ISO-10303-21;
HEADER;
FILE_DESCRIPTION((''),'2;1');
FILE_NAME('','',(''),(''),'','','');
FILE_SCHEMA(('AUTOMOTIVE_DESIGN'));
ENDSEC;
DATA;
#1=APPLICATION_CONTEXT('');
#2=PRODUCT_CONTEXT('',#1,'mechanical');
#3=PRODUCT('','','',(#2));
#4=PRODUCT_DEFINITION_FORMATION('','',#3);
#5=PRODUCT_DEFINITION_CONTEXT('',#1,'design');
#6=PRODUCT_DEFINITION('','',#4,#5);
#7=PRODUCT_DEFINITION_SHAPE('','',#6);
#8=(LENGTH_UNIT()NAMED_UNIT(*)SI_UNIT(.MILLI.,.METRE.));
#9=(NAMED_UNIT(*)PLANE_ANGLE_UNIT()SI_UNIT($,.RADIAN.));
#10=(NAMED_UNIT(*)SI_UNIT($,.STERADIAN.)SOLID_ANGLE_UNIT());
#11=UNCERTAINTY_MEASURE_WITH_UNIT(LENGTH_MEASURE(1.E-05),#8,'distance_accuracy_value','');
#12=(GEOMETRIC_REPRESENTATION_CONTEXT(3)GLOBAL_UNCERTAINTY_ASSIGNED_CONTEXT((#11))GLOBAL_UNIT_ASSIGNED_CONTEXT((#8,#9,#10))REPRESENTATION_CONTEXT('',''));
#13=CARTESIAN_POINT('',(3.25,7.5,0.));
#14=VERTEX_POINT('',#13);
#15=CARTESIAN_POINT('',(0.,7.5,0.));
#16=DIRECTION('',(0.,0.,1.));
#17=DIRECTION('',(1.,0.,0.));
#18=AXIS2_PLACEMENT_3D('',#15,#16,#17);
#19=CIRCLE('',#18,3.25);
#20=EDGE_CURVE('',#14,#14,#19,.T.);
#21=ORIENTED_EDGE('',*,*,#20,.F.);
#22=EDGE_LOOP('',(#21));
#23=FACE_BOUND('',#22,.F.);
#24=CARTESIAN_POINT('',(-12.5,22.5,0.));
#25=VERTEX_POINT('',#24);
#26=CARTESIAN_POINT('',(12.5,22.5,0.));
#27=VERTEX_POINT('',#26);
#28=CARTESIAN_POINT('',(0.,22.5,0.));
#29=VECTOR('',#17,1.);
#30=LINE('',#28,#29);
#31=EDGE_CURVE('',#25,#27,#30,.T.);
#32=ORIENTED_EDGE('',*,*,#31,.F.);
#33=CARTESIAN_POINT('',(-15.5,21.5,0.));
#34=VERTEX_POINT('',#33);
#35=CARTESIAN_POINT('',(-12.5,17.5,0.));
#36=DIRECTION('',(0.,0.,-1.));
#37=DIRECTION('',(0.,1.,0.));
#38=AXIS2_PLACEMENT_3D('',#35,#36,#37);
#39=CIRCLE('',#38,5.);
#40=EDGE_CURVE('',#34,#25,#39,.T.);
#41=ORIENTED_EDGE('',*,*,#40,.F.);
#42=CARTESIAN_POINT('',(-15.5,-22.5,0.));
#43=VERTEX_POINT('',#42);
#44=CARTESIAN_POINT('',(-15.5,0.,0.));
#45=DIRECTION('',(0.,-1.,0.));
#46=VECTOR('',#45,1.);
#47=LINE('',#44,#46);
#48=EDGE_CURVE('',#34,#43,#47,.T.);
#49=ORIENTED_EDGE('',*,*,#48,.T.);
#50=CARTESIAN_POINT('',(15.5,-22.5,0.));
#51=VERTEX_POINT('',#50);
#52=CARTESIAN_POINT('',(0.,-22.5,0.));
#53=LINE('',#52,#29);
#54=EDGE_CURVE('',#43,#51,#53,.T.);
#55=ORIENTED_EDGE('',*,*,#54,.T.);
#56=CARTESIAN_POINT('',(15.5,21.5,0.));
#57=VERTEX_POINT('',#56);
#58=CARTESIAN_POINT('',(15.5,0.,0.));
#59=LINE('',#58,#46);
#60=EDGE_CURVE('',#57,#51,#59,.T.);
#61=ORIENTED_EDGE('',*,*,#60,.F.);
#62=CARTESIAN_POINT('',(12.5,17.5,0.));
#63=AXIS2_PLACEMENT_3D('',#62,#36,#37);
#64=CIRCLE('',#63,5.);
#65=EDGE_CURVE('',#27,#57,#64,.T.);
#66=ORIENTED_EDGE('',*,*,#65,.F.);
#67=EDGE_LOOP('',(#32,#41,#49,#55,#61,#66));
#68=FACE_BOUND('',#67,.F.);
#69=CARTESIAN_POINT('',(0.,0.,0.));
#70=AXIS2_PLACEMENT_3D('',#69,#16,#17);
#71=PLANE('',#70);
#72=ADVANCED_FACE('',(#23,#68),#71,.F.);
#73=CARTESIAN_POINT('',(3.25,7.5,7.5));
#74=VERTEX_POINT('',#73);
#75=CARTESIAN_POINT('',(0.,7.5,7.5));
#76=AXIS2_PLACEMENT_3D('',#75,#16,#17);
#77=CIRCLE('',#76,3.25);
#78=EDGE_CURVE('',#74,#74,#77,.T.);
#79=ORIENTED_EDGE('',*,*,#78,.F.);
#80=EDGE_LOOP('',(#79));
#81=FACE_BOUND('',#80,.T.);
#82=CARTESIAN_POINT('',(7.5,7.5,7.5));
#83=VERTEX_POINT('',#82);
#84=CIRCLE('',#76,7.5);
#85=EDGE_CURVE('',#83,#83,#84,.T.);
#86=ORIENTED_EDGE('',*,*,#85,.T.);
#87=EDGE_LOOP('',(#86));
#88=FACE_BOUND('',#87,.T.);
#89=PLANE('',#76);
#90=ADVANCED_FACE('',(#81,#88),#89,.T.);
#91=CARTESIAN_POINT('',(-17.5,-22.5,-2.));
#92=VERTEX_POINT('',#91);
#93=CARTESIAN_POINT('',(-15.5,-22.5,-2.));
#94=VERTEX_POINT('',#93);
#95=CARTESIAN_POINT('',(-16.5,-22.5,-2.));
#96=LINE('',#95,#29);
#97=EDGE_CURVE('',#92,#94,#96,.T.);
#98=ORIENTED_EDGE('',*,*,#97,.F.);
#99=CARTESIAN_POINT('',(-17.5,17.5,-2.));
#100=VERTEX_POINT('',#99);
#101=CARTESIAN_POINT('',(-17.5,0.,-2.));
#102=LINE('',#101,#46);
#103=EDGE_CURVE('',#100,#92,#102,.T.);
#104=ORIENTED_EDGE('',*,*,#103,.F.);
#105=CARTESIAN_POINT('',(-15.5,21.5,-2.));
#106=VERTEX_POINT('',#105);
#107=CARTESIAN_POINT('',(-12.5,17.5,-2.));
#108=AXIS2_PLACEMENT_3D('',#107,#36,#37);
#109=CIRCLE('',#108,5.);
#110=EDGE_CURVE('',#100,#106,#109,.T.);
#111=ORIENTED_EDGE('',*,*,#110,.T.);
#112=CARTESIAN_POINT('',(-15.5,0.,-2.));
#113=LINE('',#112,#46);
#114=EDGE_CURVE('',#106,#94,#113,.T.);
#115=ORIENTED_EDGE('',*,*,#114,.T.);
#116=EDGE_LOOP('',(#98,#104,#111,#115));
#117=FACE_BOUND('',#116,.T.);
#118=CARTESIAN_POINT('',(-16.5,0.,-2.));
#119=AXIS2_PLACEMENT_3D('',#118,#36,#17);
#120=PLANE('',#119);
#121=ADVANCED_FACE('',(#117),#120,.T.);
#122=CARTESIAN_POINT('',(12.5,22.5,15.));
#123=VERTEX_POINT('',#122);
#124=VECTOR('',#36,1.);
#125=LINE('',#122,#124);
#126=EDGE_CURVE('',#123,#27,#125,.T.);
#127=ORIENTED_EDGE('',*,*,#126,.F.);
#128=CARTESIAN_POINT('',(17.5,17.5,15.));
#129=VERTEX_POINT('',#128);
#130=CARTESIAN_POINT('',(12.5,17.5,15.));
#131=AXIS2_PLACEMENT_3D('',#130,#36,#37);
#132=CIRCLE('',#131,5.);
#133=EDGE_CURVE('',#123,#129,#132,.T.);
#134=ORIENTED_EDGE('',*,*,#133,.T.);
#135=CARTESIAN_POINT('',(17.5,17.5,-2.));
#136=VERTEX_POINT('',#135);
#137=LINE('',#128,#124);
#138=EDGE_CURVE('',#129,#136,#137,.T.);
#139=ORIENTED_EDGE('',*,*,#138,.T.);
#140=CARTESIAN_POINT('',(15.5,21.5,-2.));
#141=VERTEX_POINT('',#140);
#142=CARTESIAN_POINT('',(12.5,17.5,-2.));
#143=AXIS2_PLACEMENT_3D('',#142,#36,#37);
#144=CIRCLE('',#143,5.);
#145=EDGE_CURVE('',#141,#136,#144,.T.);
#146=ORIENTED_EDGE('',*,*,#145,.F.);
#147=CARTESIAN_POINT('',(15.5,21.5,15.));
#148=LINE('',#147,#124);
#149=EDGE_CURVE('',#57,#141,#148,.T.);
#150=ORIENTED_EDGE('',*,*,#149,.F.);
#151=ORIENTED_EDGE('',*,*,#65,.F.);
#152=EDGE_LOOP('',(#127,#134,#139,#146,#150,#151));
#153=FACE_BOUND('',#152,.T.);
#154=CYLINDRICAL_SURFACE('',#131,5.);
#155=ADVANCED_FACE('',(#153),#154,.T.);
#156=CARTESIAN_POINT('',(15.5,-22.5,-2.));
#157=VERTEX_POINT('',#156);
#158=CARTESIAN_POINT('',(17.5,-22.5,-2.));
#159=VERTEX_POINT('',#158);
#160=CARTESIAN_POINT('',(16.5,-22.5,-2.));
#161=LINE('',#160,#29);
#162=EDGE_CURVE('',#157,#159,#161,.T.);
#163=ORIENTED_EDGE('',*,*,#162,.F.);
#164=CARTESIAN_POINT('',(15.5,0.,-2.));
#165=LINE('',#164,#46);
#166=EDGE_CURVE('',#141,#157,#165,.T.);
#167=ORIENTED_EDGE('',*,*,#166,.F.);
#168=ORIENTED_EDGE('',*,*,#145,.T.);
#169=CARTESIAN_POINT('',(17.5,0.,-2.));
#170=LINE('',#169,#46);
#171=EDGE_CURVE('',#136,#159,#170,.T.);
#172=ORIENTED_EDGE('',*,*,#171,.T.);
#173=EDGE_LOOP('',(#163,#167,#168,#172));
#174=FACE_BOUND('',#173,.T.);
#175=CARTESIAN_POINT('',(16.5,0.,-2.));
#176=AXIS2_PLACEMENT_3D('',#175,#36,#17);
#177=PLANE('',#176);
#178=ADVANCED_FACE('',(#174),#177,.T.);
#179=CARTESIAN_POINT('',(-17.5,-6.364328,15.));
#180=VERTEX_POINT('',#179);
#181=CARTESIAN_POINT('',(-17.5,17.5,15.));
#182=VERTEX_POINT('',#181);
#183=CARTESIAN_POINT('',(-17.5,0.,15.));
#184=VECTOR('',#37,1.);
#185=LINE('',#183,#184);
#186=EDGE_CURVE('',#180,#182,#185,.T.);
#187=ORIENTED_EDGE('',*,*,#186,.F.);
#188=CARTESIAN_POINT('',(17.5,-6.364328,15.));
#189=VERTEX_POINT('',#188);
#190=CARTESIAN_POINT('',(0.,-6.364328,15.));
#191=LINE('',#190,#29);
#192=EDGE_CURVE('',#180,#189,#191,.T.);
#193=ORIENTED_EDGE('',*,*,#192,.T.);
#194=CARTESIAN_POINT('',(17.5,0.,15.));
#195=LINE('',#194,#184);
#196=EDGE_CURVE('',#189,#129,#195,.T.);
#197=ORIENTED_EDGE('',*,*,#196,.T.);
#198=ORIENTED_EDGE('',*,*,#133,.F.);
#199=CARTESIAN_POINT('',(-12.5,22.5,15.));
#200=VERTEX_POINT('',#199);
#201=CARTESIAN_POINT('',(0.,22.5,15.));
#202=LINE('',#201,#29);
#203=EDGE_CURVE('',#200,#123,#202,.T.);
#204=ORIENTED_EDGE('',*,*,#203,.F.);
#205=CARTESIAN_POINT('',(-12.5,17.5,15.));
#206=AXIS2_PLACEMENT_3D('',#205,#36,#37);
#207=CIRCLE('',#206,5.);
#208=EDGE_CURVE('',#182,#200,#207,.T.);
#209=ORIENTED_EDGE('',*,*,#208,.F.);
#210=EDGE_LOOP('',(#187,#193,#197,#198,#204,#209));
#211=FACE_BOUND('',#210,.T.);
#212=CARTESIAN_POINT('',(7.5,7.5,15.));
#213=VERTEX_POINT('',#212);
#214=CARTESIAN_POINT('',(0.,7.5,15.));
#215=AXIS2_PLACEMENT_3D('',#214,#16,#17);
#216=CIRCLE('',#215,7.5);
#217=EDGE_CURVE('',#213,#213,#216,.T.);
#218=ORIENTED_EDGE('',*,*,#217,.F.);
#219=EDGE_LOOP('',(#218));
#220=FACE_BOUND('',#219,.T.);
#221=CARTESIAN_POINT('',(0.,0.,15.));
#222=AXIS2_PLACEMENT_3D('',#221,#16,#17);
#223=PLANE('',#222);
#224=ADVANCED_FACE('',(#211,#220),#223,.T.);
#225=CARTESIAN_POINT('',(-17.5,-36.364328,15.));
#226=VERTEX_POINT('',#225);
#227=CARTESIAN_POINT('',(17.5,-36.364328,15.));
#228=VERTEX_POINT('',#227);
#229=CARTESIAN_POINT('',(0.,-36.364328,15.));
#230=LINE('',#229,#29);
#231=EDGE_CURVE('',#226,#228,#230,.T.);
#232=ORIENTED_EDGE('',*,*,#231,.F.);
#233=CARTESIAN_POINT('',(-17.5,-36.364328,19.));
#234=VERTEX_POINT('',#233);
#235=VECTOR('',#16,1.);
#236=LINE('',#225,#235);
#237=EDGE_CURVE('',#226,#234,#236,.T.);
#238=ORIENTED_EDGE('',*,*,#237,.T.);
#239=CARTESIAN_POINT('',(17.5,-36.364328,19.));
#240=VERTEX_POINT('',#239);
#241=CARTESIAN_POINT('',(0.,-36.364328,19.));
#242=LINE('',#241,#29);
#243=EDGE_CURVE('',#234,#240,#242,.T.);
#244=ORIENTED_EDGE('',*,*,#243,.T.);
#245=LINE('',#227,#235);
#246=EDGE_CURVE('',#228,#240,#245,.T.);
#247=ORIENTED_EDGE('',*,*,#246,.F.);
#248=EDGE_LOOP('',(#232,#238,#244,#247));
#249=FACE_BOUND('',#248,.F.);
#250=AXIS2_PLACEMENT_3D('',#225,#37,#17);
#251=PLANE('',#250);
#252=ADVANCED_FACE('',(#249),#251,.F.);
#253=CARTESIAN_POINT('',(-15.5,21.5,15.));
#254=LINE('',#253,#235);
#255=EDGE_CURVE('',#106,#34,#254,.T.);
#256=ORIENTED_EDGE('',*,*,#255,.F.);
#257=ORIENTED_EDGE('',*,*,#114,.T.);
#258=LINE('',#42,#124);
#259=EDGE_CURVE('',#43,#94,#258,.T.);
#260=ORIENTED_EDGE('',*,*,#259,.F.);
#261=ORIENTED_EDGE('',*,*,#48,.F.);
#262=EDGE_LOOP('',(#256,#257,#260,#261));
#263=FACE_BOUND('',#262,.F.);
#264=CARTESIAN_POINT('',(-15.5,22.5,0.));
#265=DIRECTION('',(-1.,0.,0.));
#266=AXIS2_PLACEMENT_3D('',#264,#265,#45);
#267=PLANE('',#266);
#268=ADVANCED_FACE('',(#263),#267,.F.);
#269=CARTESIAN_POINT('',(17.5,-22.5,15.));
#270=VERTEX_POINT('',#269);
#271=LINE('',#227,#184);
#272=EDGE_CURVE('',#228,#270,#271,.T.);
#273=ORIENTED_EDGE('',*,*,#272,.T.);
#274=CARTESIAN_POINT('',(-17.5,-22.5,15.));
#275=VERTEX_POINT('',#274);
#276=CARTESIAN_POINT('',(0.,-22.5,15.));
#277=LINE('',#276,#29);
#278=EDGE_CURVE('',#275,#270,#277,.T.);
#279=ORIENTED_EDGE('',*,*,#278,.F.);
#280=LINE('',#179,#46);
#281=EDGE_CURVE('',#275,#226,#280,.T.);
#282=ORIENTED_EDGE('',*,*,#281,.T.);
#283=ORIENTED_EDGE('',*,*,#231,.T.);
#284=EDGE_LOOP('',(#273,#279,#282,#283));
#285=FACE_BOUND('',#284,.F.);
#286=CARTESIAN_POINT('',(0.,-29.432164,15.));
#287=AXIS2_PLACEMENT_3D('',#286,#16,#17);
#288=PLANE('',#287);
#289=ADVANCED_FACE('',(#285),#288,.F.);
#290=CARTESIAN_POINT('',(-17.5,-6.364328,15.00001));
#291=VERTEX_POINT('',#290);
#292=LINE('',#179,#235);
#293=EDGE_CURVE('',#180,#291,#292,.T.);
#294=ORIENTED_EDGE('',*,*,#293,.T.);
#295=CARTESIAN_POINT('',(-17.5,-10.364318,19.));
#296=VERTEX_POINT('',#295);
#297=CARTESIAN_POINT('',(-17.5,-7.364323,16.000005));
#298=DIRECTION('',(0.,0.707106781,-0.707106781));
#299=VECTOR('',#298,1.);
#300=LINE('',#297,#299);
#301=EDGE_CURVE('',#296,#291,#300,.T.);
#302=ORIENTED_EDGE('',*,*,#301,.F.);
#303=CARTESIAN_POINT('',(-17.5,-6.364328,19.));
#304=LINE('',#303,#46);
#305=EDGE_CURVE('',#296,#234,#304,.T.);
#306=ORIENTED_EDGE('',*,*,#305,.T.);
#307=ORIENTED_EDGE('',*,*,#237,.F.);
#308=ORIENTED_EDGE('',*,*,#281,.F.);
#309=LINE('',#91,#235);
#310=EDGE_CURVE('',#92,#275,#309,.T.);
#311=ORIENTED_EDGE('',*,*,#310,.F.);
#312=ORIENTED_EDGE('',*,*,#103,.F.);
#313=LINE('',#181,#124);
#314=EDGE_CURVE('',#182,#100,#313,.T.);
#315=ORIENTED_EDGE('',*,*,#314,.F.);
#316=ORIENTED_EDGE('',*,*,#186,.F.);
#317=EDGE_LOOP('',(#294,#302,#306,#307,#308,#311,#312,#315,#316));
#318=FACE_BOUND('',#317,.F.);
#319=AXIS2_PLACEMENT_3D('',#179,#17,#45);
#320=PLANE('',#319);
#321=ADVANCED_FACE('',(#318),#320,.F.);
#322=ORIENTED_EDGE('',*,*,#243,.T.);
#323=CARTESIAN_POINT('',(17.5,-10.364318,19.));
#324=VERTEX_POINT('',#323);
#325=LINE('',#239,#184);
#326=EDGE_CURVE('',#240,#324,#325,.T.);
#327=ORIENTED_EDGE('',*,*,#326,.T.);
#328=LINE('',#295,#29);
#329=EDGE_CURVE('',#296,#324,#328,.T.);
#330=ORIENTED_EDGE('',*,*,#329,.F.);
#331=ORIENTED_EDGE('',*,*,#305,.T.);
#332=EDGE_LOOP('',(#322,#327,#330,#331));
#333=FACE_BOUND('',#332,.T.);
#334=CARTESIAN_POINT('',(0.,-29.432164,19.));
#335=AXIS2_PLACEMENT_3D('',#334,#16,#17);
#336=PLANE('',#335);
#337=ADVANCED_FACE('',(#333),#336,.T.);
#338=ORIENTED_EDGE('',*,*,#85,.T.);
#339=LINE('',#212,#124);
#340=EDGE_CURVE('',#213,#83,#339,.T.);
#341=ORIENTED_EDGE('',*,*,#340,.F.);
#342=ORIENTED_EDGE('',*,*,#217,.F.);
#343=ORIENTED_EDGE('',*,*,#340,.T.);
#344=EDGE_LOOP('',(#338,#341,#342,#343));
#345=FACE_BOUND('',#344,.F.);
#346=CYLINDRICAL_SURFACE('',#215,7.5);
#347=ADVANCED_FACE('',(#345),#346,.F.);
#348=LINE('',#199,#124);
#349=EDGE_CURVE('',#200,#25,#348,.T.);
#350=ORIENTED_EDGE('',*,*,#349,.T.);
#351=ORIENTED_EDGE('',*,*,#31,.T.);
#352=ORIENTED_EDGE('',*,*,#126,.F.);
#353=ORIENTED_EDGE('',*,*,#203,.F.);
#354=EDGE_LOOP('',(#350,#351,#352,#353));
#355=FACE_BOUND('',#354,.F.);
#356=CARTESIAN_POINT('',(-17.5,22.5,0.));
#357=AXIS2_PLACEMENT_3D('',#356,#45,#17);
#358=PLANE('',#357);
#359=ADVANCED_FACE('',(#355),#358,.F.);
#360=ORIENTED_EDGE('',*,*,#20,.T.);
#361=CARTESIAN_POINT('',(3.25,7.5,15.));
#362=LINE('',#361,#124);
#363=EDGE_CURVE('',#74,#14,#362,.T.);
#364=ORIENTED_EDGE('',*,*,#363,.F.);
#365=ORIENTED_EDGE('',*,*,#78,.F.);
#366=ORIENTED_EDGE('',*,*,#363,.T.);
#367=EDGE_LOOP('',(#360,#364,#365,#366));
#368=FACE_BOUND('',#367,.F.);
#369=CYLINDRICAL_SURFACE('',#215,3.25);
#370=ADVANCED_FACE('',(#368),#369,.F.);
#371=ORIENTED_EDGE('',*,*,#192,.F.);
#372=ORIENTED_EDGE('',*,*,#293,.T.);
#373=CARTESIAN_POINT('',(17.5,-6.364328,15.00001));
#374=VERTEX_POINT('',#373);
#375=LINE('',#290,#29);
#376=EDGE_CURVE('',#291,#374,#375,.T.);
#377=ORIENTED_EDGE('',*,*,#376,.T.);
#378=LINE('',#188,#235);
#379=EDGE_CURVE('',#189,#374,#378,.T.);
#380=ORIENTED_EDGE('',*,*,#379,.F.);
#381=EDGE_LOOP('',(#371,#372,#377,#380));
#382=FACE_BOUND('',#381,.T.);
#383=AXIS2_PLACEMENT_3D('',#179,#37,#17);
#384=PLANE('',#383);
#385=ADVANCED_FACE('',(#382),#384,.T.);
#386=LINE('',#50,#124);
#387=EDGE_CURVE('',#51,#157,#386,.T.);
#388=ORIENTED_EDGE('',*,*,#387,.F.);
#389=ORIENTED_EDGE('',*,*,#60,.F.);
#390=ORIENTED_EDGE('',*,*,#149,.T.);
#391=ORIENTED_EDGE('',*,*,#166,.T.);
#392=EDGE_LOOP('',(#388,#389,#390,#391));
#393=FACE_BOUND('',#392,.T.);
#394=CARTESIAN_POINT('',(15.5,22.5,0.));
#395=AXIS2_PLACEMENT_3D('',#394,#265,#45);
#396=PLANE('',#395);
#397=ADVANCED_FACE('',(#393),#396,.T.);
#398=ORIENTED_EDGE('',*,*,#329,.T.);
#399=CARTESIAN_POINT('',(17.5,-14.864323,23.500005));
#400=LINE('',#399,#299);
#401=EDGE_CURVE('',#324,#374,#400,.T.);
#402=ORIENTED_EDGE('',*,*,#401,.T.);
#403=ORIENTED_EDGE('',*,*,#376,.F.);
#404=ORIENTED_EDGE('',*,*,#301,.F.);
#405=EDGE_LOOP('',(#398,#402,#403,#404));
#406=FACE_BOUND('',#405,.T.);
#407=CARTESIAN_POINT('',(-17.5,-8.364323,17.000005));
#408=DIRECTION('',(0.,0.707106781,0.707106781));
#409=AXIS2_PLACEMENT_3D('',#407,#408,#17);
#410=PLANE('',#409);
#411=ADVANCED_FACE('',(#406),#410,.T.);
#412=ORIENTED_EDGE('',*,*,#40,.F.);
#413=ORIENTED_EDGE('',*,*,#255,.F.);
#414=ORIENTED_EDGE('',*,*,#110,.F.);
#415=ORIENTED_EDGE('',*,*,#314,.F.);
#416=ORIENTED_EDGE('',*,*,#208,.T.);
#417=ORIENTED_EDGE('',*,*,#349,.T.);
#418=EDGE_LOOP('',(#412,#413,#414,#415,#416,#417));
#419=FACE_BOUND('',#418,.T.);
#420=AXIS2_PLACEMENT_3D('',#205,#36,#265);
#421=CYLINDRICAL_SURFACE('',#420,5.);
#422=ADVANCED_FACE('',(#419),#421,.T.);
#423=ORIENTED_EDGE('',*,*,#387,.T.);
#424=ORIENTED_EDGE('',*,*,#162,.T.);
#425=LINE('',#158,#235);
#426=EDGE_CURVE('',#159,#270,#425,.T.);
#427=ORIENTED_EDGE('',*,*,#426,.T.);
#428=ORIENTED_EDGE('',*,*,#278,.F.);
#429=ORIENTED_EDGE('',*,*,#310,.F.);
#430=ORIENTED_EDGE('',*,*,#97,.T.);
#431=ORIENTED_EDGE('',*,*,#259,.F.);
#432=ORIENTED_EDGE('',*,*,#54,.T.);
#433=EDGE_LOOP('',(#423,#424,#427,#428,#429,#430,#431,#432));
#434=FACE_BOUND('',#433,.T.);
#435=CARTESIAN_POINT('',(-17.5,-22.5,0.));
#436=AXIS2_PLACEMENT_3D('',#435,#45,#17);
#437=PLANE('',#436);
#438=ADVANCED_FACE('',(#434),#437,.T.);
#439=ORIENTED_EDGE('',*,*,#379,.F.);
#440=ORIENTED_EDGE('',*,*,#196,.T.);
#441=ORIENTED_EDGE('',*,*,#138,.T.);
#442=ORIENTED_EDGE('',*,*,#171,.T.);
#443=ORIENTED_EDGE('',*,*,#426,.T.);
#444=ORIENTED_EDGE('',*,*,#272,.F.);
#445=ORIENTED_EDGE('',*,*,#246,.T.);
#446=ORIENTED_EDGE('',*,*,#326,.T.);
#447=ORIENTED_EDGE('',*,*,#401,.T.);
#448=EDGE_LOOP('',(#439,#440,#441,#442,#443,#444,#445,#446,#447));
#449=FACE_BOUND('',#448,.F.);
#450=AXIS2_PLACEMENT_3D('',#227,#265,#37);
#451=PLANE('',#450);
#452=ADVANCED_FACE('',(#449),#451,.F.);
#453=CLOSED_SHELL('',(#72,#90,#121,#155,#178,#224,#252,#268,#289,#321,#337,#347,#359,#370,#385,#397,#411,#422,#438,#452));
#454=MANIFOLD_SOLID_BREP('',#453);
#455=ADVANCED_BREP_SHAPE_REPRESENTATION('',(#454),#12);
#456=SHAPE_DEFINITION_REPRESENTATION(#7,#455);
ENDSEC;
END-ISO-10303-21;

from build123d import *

# Parameters (mm, degrees)
F0_W      = 35
F0_H      = 45
F1_DEPTH  = 15
F2_W      = 2
F2_H      = 45
F3_DEPTH  = 2
F4_W      = 35
F4_H      = 13.8643281162
F4_H_2    = 16.1356718838
F5_DEPTH  = 4
F6_SIZE   = 3.99999
F7_R      = 3.25
F8_DEPTH  = 15
F9_R      = 5
F10_R     = 7.5
F10_R_2   = 3.25
F11_DEPTH = 7.5


# Not quite as in the source:
# - a fillet or chamfer is up to 0.001 mm smaller than in the source, because OpenCascade refuses the exact size


with BuildPart() as f1:
    # F0 (on Top) → F1 (new body)
    with BuildSketch(Plane.XY):
        Rectangle(F0_W, F0_H)
    extrude(amount=F1_DEPTH)

    # F2 (on face) → F3 (join)
    with BuildSketch(Plane(origin=(0, 0, 0), x_dir=(1, 0, 0), z_dir=(0, 0, -1))):
        with Locations((-16.5, 0)):
            Rectangle(F2_W, F2_H)
        with Locations((16.5, 0)):
            Rectangle(F2_W, F2_H)
    extrude(amount=F3_DEPTH)

    # F4 (on face) → F5 (join)
    with BuildSketch(Plane.XY.offset(15)):
        with Locations((0, -29.4321640581)):
            Rectangle(F4_W, F4_H)
        with Locations((0, -14.4321640581)):
            Rectangle(F4_W, F4_H_2)
    extrude(amount=F5_DEPTH)

    # F6 (size 4 in the source; OpenCascade refuses exactly that, so slightly less here)
    f6_edges = [f1.edges().sort_by_distance(p)[0] for p in [
        (0, -6.364328, 19),
    ]]
    chamfer(f6_edges, length=F6_SIZE)

    # F7 (on face) → F8 (cut, through all)
    with BuildSketch(Plane.XY.offset(15)):
        with Locations((0, 7.5)):
            Circle(F7_R)
    extrude(amount=-F8_DEPTH, mode=Mode.SUBTRACT)

    # F9
    f9_edges = [f1.edges().sort_by_distance(p)[0] for p in [
        (-17.5, 22.5, 6.5),
        (17.5, 22.5, 6.5),
    ]]
    fillet(f9_edges, radius=F9_R)

    # F10 (on face) → F11 (cut)
    with BuildSketch(Plane.XY.offset(15)):
        with Locations((0, 7.5)):
            Circle(F10_R)
        with Locations((0, 7.5)):
            Circle(F10_R_2, mode=Mode.SUBTRACT)
    extrude(amount=-F11_DEPTH, mode=Mode.SUBTRACT)


solid = f1.part
